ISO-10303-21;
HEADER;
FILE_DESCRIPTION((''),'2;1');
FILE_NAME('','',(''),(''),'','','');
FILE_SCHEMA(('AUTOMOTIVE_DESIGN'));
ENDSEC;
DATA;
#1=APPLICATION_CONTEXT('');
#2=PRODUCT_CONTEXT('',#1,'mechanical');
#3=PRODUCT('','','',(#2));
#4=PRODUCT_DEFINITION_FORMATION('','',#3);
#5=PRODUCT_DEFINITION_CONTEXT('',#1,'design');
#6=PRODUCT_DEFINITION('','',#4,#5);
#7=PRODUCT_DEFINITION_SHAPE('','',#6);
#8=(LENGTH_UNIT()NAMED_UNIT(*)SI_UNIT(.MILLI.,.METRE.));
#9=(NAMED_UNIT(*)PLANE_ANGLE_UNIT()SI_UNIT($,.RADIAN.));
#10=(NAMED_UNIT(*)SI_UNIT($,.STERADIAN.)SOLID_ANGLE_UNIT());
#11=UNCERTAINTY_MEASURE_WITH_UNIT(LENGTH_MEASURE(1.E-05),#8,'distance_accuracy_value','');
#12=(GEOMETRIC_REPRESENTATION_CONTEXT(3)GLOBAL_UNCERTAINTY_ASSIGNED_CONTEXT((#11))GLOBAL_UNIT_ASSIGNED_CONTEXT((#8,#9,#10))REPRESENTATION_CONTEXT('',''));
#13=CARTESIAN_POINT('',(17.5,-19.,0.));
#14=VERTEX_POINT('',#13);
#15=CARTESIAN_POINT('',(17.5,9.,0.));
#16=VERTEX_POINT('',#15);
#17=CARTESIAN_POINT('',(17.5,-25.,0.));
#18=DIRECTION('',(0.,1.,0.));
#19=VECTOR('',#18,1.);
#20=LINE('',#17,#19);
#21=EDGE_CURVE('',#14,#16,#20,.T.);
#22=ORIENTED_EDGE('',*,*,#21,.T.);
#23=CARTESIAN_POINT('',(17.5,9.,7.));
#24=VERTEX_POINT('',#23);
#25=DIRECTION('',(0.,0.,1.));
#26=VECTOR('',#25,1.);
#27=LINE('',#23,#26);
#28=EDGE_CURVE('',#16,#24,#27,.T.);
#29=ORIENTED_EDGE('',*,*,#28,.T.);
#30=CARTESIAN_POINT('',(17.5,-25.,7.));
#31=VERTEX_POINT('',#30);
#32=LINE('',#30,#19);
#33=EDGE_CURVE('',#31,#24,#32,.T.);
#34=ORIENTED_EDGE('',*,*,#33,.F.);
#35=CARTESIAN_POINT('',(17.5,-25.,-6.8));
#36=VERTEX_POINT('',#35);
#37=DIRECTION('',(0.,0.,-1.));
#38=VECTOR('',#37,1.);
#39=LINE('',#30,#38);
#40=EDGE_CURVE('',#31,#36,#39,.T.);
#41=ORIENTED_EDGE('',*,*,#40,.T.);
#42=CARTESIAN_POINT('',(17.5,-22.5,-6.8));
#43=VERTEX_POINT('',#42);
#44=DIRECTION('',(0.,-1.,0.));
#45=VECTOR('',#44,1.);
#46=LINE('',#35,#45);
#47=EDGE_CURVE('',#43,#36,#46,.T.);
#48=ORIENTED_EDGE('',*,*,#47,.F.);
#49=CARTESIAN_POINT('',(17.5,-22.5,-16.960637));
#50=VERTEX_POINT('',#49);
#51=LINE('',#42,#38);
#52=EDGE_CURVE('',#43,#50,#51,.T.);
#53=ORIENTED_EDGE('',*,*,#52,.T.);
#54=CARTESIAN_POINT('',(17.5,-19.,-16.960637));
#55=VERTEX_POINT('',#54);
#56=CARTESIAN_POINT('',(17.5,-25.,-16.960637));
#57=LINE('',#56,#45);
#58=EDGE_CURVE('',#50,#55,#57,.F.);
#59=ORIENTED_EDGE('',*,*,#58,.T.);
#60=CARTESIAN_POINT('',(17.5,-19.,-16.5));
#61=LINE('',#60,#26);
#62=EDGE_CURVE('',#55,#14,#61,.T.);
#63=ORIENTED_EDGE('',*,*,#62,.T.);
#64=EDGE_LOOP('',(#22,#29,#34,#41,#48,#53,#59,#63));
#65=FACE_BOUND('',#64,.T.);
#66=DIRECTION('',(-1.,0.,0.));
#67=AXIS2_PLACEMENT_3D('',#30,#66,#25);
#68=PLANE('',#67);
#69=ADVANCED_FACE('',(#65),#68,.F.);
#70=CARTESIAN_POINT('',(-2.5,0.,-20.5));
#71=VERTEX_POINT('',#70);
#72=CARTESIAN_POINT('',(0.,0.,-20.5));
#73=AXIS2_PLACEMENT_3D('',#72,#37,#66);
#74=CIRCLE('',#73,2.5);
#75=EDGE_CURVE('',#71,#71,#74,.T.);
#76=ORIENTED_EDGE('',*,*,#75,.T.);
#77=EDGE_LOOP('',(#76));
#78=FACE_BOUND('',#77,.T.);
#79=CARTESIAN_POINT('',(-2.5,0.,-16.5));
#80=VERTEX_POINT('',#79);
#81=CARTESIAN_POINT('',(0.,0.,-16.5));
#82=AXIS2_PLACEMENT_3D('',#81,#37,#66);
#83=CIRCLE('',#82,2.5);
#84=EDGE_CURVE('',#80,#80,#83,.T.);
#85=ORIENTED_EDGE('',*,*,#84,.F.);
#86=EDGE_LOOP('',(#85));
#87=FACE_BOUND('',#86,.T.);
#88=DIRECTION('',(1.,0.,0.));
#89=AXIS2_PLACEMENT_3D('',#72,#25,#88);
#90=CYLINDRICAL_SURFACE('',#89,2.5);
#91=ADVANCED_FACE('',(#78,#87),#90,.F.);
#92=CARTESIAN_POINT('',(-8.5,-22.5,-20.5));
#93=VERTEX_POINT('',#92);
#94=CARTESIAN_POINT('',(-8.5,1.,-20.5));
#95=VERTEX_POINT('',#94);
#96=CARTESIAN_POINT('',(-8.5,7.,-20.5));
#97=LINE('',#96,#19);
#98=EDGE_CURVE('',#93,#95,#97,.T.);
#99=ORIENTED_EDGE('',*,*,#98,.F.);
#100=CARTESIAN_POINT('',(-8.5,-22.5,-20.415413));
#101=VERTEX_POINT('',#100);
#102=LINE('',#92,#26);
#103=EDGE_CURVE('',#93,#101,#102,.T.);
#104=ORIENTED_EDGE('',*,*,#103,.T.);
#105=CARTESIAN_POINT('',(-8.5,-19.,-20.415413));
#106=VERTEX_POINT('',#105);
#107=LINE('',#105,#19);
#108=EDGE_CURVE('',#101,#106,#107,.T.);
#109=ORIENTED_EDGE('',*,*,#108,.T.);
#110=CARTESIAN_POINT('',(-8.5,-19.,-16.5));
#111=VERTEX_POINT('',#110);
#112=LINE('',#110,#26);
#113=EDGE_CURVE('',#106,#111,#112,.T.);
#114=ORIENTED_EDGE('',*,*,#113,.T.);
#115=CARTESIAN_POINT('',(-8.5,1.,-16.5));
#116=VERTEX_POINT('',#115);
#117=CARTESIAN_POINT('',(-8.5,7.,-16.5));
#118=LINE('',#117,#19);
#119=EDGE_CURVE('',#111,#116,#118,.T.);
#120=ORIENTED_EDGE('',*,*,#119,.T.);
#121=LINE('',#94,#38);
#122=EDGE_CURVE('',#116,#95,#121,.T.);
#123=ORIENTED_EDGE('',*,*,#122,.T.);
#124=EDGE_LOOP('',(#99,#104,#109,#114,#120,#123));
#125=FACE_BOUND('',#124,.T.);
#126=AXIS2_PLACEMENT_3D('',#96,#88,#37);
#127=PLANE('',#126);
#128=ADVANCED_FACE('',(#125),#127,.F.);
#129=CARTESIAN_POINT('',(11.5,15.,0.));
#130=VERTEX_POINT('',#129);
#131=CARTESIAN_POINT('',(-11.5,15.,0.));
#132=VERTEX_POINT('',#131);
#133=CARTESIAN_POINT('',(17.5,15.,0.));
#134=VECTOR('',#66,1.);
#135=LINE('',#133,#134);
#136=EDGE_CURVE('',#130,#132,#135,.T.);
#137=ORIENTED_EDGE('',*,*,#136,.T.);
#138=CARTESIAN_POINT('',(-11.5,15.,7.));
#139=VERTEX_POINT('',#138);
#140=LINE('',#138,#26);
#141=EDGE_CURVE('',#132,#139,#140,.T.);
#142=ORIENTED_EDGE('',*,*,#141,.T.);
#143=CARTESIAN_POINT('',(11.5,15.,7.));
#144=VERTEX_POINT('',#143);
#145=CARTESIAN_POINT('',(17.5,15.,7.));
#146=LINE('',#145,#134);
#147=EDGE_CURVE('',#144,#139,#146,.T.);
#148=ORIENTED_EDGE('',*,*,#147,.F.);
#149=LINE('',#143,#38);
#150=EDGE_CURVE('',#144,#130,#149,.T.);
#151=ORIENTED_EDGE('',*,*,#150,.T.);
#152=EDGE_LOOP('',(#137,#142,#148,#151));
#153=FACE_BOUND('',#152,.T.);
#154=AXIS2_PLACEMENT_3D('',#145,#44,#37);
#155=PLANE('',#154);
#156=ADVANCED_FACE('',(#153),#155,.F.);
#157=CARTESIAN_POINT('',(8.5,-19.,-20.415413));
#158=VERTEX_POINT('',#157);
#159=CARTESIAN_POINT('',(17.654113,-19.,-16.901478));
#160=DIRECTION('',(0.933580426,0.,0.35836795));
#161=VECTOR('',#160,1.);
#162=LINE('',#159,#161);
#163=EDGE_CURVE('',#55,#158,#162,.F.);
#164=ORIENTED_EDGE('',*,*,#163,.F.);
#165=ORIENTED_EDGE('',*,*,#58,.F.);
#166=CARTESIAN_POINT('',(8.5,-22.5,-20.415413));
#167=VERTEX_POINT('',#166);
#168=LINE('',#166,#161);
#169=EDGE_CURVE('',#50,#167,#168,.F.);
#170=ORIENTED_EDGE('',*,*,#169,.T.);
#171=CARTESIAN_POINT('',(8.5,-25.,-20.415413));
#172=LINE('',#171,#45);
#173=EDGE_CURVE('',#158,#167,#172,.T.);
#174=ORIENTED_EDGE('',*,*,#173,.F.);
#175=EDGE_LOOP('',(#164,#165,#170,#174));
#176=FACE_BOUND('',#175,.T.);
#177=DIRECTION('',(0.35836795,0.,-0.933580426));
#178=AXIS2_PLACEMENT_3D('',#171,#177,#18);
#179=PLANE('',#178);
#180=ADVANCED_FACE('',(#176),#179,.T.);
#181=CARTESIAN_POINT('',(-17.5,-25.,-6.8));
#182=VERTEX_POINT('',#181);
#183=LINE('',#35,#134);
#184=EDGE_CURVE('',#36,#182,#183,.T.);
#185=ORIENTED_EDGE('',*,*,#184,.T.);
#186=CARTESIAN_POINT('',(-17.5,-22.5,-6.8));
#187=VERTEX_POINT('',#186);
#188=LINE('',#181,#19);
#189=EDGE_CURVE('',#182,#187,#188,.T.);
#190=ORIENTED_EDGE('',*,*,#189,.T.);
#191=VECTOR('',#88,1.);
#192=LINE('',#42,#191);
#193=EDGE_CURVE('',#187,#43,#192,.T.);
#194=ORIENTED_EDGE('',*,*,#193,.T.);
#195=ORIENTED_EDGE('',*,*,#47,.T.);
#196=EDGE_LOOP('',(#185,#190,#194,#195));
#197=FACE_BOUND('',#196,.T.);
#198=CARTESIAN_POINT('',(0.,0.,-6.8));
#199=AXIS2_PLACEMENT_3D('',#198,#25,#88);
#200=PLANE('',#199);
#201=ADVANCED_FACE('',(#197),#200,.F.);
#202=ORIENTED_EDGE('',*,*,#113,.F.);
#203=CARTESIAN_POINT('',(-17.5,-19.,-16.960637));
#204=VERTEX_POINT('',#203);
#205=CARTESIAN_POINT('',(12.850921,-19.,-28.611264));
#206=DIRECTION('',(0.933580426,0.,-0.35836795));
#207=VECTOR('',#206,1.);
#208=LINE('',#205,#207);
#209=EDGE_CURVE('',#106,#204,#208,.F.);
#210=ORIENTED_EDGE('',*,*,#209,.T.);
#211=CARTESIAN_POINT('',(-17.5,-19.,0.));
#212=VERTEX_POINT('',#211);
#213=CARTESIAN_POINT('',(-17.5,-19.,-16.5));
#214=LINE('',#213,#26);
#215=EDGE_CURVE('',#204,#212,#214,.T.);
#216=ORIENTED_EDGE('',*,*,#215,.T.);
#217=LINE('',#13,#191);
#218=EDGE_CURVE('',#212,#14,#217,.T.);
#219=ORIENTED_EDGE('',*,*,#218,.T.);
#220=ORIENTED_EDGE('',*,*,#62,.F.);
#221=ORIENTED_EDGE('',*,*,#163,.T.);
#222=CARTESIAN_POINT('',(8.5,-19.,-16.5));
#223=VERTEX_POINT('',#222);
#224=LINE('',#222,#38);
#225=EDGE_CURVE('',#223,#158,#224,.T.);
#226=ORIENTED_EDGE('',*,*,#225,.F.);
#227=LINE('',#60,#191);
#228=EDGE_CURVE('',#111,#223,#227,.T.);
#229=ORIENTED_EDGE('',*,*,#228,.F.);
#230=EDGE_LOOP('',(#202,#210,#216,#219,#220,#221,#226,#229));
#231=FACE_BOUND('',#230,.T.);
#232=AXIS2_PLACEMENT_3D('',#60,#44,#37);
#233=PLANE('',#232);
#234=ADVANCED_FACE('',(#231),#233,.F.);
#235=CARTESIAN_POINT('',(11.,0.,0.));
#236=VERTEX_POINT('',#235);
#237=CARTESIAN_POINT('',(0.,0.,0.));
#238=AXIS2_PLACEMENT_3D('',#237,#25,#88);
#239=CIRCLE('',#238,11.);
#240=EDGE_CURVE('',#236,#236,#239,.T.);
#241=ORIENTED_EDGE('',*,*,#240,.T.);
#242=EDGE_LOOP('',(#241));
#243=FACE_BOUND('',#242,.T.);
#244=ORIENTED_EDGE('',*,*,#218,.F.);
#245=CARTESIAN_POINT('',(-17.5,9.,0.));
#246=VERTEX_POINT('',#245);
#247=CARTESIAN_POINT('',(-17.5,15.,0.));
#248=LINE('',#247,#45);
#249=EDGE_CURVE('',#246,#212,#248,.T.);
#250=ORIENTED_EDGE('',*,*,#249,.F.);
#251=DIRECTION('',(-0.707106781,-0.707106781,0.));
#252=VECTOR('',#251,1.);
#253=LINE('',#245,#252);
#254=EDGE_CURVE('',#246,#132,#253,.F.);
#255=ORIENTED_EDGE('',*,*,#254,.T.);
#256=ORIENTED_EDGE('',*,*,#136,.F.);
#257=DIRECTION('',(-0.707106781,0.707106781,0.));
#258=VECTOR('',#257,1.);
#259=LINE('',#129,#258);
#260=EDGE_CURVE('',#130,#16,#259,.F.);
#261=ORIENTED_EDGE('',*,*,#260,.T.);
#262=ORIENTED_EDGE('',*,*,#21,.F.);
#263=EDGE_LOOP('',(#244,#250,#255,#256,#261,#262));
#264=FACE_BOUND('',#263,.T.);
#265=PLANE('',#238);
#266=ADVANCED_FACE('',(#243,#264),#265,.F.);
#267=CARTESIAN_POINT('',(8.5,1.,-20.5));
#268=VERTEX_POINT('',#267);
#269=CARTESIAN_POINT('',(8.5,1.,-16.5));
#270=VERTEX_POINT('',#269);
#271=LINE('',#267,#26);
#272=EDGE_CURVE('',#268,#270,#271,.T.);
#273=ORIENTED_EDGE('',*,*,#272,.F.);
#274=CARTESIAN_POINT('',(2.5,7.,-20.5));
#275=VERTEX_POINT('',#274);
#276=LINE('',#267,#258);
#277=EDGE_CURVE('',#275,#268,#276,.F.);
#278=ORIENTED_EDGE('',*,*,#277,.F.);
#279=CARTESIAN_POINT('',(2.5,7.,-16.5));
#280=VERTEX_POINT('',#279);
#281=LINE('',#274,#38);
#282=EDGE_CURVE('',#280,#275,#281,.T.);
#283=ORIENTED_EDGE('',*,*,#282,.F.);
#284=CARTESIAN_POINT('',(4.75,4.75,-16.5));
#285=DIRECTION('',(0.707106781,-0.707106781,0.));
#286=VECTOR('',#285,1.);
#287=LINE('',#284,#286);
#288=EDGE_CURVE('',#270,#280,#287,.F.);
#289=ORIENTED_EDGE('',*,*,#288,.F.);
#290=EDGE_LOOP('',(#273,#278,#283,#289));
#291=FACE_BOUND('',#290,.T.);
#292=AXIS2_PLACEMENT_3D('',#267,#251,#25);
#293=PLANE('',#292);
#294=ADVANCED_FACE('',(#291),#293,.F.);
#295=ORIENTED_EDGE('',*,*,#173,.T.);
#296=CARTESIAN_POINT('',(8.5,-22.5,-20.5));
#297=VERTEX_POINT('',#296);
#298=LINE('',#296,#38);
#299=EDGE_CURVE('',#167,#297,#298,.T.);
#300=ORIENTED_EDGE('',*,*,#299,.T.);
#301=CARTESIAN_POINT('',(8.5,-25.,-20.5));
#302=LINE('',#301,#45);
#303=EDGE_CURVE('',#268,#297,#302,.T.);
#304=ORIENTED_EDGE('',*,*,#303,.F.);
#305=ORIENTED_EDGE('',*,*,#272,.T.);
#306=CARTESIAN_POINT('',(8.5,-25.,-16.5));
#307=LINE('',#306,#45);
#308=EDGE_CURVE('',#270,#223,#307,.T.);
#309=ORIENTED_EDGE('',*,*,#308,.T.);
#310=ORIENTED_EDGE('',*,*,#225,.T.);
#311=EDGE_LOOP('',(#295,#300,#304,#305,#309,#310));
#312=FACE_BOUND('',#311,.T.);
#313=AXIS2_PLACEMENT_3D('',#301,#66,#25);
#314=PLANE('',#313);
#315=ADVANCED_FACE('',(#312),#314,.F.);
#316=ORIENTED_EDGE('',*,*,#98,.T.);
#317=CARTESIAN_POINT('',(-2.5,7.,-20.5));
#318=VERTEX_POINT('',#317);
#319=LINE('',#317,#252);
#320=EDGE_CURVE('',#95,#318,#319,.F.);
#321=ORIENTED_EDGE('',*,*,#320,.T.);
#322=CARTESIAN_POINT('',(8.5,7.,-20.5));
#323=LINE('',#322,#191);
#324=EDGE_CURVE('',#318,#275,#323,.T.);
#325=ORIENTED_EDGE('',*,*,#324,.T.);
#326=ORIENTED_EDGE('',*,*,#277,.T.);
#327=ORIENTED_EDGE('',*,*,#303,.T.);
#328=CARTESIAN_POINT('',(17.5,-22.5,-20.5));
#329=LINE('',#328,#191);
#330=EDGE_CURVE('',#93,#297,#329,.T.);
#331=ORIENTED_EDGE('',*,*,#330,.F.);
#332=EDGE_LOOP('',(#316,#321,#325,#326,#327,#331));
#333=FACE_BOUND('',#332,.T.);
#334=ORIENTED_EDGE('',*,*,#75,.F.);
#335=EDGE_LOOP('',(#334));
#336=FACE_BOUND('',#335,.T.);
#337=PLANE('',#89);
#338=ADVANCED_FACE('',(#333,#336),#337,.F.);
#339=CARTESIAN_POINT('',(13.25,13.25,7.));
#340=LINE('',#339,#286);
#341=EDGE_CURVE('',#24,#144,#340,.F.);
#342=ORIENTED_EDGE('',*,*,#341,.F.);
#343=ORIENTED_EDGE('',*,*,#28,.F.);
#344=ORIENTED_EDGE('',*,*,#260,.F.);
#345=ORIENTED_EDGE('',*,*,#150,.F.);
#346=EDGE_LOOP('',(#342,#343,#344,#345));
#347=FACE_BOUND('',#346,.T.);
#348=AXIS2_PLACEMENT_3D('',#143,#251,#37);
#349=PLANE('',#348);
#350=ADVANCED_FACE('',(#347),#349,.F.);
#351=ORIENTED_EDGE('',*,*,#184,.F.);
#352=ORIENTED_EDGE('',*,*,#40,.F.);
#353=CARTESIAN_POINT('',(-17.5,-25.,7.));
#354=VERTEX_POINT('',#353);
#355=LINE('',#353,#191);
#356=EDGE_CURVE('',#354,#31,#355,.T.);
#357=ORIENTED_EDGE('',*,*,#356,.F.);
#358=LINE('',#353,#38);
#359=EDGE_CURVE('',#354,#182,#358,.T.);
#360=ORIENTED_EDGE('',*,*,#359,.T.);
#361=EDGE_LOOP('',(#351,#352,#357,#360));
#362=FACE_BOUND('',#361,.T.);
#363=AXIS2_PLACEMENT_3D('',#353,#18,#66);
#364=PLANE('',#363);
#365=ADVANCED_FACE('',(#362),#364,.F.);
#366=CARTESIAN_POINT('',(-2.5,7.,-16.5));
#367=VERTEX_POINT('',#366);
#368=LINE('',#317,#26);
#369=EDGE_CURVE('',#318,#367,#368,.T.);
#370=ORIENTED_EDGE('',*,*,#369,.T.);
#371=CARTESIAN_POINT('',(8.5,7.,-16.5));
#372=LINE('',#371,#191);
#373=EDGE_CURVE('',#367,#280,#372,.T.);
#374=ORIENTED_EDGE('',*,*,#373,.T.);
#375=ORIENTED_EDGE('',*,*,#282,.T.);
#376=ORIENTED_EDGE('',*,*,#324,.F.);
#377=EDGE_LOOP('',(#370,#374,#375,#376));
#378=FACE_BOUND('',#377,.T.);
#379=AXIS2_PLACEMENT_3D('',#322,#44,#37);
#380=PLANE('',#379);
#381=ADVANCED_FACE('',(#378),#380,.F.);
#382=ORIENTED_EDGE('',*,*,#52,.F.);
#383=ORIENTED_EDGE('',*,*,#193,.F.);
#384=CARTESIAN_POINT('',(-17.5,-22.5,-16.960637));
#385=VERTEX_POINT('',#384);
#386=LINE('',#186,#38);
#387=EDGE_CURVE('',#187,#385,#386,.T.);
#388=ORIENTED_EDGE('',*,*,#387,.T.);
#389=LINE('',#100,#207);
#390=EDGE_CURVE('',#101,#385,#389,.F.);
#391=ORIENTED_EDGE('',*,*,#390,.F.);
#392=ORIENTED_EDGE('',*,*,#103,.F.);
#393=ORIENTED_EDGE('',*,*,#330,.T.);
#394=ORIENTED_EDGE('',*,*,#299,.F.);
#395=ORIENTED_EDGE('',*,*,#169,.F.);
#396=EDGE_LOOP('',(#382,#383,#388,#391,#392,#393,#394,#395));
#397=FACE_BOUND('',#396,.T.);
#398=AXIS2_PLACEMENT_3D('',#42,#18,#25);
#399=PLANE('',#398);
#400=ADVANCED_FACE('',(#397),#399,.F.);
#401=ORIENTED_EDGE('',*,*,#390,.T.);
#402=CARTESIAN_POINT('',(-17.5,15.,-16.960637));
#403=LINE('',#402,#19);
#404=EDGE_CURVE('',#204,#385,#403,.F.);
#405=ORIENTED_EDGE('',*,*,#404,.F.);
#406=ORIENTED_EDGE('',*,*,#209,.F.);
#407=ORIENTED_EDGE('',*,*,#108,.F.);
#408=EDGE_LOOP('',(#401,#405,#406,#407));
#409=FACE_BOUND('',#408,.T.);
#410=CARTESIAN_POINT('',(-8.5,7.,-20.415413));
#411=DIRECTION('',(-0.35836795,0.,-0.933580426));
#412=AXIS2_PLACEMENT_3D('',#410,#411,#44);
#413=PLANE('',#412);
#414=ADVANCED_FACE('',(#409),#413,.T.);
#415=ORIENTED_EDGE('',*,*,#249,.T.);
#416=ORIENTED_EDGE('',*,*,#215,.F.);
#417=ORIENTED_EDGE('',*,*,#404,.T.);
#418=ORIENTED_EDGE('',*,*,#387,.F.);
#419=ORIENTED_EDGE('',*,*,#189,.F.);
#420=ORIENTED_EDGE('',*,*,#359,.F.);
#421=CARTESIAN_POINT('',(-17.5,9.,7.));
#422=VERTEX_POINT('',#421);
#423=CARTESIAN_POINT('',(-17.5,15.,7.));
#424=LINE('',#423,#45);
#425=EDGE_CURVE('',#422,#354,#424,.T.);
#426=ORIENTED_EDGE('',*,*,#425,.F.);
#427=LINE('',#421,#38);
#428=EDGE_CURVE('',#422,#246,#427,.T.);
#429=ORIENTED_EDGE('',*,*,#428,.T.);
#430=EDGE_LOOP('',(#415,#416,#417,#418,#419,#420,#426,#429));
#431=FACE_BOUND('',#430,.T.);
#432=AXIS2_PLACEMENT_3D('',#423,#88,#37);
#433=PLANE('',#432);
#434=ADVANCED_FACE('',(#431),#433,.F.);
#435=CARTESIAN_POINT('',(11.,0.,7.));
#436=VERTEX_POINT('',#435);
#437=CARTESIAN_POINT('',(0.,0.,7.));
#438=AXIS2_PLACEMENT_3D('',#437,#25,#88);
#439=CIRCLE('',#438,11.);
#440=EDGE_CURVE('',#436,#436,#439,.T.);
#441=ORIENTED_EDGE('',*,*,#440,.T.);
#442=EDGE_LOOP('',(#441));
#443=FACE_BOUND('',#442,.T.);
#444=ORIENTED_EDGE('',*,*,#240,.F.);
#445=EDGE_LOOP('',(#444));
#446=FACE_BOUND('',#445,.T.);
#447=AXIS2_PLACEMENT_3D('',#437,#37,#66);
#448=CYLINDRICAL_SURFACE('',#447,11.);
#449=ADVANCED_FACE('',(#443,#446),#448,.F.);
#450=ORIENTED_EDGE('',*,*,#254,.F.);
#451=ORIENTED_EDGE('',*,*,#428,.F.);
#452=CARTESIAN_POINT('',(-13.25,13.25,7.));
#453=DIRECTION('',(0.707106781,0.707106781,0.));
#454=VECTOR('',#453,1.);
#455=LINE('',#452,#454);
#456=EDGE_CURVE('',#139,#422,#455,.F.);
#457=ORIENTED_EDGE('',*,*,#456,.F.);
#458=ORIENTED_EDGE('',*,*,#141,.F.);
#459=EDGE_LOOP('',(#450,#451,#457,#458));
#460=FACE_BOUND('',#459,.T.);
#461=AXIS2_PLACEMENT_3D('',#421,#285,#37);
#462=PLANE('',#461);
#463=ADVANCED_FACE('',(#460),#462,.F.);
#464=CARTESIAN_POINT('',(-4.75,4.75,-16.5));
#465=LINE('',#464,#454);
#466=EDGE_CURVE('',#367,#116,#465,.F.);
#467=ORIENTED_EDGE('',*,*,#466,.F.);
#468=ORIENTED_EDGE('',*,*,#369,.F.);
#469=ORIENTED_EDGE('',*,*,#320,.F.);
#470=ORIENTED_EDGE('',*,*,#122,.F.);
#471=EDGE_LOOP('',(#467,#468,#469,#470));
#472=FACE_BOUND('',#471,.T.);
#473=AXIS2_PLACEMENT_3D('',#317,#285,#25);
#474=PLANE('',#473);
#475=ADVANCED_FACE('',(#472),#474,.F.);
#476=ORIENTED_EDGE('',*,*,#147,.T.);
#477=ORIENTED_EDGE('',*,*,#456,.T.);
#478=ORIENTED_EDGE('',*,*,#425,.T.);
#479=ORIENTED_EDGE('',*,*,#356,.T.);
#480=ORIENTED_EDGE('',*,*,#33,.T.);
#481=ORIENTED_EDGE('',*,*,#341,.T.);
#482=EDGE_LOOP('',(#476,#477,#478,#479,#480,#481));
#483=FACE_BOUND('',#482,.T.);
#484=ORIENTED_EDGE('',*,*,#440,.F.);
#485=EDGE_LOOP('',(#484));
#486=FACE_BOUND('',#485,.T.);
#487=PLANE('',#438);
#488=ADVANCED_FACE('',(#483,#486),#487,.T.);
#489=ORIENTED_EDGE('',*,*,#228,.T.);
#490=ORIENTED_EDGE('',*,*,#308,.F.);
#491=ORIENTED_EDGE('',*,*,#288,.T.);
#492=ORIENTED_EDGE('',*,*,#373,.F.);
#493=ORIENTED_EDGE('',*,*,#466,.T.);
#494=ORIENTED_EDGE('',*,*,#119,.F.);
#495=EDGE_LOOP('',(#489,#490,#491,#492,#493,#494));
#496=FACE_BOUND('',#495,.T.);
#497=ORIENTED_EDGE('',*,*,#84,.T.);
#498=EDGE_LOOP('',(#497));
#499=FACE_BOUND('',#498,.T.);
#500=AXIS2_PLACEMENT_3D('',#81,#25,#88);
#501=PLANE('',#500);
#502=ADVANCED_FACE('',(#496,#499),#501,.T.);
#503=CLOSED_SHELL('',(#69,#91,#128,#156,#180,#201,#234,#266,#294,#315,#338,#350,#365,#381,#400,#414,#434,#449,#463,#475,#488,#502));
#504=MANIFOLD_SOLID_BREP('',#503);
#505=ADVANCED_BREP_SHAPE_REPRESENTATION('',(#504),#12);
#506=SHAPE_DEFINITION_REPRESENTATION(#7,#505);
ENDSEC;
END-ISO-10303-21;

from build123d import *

# Parameters (mm, degrees)
SKETCH1_W           = 35
SKETCH1_H           = 40
SKETCH1_R           = 11
BOSS_EXTRUDE1_DEPTH = 7
SKETCH2_W           = 35
SKETCH2_H           = 6
BOSS_EXTRUDE2_DEPTH = 16.5
SKETCH3_W           = 17
SKETCH3_H           = 32
SKETCH3_R           = 2.5
BOSS_EXTRUDE3_DEPTH = 4
CHAMFER1_SIZE       = 10.2
CHAMFER1_SIZE_2     = 3.915413157
CHAMFER2_SIZE       = 6
SKETCH4_W           = 35
SKETCH4_H           = 2.5
CUT_EXTRUDE1_DEPTH  = 13.7


with BuildPart() as part:
    # Sketch1 → Boss-Extrude1 (new body)
    with BuildSketch(Plane.XY):
        with Locations((0, -5)):
            Rectangle(SKETCH1_W, SKETCH1_H)
        Circle(SKETCH1_R, mode=Mode.SUBTRACT)
    extrude(amount=BOSS_EXTRUDE1_DEPTH)

    # Sketch2 → Boss-Extrude2 (add)
    with BuildSketch(Plane(origin=(0, 0, 0), x_dir=(-1, 0, 0), z_dir=(0, 0, -1))):
        with Locations((0, -22)):
            Rectangle(SKETCH2_W, SKETCH2_H)
    extrude(amount=BOSS_EXTRUDE2_DEPTH)

    # Sketch3 → Boss-Extrude3 (add)
    with BuildSketch(Plane(origin=(0, 0, -16.5), x_dir=(-1, 0, 0), z_dir=(0, 0, -1))):
        with Locations((0, -9)):
            Rectangle(SKETCH3_W, SKETCH3_H)
        Circle(SKETCH3_R, mode=Mode.SUBTRACT)
    extrude(amount=BOSS_EXTRUDE3_DEPTH)

    # Chamfer1
    # the kernel refuses this chamfer: 10.2, 3.915413157 mm, written as the material it adds along each edge
    with BuildSketch(Plane(origin=(-8.5, -19, -16.5), x_dir=(-0.9999045356599434, 0, 0.013817364679016049), z_dir=(0, -1, 0))) as chamfer1_piece_1_section:
        Polygon((CHAMFER1_SIZE * 0.99990453566, CHAMFER1_SIZE * 0.013817364679), (-CHAMFER1_SIZE_2 * 0.0138173646803, CHAMFER1_SIZE_2 * 0.999904535752), (0, 0), align=None)
    chamfer1_piece_1 = extrude(amount=6, mode=Mode.PRIVATE)
    chamfer1_piece_1 = split(chamfer1_piece_1, bisect_by=Plane(origin=(-17.5, -22, -17.821300415), z_dir=(1, 0, 0)), keep=Keep.TOP, mode=Mode.PRIVATE)
    add(chamfer1_piece_1)
    with BuildSketch(Plane(origin=(8.5, -25, -16.5), x_dir=(0.9999045356599434, 0, 0.013817364679016049), z_dir=(0, 1, 0))) as chamfer1_piece_2_section:
        Polygon((CHAMFER1_SIZE * 0.99990453566, CHAMFER1_SIZE * 0.013817364679), (-CHAMFER1_SIZE_2 * 0.0138173646803, CHAMFER1_SIZE_2 * 0.999904535752), (0, 0), align=None)
    chamfer1_piece_2 = extrude(amount=6, mode=Mode.PRIVATE)
    chamfer1_piece_2 = split(chamfer1_piece_2, bisect_by=Plane(origin=(17.5, -22, -17.821300415), z_dir=(-1, 0, 0)), keep=Keep.TOP, mode=Mode.PRIVATE)
    add(chamfer1_piece_2)

    # Chamfer2
    chamfer2_edges = [part.edges().sort_by_distance(p)[0] for p in [
        (-8.5, 7, -18.5),
        (8.5, 7, -18.5),
        (17.5, 15, 3.5),
        (-17.5, 15, 3.5),
    ]]
    chamfer(chamfer2_edges, length=CHAMFER2_SIZE)

    # Sketch4 → Cut-Extrude1 (cut)
    with BuildSketch(Plane(origin=(0, 0, -20.5), x_dir=(-1, 0, 0), z_dir=(0, 0, -1))):
        with Locations((0, -23.75)):
            Rectangle(SKETCH4_W, SKETCH4_H)
    extrude(amount=-CUT_EXTRUDE1_DEPTH, mode=Mode.SUBTRACT)


solid = part.part
